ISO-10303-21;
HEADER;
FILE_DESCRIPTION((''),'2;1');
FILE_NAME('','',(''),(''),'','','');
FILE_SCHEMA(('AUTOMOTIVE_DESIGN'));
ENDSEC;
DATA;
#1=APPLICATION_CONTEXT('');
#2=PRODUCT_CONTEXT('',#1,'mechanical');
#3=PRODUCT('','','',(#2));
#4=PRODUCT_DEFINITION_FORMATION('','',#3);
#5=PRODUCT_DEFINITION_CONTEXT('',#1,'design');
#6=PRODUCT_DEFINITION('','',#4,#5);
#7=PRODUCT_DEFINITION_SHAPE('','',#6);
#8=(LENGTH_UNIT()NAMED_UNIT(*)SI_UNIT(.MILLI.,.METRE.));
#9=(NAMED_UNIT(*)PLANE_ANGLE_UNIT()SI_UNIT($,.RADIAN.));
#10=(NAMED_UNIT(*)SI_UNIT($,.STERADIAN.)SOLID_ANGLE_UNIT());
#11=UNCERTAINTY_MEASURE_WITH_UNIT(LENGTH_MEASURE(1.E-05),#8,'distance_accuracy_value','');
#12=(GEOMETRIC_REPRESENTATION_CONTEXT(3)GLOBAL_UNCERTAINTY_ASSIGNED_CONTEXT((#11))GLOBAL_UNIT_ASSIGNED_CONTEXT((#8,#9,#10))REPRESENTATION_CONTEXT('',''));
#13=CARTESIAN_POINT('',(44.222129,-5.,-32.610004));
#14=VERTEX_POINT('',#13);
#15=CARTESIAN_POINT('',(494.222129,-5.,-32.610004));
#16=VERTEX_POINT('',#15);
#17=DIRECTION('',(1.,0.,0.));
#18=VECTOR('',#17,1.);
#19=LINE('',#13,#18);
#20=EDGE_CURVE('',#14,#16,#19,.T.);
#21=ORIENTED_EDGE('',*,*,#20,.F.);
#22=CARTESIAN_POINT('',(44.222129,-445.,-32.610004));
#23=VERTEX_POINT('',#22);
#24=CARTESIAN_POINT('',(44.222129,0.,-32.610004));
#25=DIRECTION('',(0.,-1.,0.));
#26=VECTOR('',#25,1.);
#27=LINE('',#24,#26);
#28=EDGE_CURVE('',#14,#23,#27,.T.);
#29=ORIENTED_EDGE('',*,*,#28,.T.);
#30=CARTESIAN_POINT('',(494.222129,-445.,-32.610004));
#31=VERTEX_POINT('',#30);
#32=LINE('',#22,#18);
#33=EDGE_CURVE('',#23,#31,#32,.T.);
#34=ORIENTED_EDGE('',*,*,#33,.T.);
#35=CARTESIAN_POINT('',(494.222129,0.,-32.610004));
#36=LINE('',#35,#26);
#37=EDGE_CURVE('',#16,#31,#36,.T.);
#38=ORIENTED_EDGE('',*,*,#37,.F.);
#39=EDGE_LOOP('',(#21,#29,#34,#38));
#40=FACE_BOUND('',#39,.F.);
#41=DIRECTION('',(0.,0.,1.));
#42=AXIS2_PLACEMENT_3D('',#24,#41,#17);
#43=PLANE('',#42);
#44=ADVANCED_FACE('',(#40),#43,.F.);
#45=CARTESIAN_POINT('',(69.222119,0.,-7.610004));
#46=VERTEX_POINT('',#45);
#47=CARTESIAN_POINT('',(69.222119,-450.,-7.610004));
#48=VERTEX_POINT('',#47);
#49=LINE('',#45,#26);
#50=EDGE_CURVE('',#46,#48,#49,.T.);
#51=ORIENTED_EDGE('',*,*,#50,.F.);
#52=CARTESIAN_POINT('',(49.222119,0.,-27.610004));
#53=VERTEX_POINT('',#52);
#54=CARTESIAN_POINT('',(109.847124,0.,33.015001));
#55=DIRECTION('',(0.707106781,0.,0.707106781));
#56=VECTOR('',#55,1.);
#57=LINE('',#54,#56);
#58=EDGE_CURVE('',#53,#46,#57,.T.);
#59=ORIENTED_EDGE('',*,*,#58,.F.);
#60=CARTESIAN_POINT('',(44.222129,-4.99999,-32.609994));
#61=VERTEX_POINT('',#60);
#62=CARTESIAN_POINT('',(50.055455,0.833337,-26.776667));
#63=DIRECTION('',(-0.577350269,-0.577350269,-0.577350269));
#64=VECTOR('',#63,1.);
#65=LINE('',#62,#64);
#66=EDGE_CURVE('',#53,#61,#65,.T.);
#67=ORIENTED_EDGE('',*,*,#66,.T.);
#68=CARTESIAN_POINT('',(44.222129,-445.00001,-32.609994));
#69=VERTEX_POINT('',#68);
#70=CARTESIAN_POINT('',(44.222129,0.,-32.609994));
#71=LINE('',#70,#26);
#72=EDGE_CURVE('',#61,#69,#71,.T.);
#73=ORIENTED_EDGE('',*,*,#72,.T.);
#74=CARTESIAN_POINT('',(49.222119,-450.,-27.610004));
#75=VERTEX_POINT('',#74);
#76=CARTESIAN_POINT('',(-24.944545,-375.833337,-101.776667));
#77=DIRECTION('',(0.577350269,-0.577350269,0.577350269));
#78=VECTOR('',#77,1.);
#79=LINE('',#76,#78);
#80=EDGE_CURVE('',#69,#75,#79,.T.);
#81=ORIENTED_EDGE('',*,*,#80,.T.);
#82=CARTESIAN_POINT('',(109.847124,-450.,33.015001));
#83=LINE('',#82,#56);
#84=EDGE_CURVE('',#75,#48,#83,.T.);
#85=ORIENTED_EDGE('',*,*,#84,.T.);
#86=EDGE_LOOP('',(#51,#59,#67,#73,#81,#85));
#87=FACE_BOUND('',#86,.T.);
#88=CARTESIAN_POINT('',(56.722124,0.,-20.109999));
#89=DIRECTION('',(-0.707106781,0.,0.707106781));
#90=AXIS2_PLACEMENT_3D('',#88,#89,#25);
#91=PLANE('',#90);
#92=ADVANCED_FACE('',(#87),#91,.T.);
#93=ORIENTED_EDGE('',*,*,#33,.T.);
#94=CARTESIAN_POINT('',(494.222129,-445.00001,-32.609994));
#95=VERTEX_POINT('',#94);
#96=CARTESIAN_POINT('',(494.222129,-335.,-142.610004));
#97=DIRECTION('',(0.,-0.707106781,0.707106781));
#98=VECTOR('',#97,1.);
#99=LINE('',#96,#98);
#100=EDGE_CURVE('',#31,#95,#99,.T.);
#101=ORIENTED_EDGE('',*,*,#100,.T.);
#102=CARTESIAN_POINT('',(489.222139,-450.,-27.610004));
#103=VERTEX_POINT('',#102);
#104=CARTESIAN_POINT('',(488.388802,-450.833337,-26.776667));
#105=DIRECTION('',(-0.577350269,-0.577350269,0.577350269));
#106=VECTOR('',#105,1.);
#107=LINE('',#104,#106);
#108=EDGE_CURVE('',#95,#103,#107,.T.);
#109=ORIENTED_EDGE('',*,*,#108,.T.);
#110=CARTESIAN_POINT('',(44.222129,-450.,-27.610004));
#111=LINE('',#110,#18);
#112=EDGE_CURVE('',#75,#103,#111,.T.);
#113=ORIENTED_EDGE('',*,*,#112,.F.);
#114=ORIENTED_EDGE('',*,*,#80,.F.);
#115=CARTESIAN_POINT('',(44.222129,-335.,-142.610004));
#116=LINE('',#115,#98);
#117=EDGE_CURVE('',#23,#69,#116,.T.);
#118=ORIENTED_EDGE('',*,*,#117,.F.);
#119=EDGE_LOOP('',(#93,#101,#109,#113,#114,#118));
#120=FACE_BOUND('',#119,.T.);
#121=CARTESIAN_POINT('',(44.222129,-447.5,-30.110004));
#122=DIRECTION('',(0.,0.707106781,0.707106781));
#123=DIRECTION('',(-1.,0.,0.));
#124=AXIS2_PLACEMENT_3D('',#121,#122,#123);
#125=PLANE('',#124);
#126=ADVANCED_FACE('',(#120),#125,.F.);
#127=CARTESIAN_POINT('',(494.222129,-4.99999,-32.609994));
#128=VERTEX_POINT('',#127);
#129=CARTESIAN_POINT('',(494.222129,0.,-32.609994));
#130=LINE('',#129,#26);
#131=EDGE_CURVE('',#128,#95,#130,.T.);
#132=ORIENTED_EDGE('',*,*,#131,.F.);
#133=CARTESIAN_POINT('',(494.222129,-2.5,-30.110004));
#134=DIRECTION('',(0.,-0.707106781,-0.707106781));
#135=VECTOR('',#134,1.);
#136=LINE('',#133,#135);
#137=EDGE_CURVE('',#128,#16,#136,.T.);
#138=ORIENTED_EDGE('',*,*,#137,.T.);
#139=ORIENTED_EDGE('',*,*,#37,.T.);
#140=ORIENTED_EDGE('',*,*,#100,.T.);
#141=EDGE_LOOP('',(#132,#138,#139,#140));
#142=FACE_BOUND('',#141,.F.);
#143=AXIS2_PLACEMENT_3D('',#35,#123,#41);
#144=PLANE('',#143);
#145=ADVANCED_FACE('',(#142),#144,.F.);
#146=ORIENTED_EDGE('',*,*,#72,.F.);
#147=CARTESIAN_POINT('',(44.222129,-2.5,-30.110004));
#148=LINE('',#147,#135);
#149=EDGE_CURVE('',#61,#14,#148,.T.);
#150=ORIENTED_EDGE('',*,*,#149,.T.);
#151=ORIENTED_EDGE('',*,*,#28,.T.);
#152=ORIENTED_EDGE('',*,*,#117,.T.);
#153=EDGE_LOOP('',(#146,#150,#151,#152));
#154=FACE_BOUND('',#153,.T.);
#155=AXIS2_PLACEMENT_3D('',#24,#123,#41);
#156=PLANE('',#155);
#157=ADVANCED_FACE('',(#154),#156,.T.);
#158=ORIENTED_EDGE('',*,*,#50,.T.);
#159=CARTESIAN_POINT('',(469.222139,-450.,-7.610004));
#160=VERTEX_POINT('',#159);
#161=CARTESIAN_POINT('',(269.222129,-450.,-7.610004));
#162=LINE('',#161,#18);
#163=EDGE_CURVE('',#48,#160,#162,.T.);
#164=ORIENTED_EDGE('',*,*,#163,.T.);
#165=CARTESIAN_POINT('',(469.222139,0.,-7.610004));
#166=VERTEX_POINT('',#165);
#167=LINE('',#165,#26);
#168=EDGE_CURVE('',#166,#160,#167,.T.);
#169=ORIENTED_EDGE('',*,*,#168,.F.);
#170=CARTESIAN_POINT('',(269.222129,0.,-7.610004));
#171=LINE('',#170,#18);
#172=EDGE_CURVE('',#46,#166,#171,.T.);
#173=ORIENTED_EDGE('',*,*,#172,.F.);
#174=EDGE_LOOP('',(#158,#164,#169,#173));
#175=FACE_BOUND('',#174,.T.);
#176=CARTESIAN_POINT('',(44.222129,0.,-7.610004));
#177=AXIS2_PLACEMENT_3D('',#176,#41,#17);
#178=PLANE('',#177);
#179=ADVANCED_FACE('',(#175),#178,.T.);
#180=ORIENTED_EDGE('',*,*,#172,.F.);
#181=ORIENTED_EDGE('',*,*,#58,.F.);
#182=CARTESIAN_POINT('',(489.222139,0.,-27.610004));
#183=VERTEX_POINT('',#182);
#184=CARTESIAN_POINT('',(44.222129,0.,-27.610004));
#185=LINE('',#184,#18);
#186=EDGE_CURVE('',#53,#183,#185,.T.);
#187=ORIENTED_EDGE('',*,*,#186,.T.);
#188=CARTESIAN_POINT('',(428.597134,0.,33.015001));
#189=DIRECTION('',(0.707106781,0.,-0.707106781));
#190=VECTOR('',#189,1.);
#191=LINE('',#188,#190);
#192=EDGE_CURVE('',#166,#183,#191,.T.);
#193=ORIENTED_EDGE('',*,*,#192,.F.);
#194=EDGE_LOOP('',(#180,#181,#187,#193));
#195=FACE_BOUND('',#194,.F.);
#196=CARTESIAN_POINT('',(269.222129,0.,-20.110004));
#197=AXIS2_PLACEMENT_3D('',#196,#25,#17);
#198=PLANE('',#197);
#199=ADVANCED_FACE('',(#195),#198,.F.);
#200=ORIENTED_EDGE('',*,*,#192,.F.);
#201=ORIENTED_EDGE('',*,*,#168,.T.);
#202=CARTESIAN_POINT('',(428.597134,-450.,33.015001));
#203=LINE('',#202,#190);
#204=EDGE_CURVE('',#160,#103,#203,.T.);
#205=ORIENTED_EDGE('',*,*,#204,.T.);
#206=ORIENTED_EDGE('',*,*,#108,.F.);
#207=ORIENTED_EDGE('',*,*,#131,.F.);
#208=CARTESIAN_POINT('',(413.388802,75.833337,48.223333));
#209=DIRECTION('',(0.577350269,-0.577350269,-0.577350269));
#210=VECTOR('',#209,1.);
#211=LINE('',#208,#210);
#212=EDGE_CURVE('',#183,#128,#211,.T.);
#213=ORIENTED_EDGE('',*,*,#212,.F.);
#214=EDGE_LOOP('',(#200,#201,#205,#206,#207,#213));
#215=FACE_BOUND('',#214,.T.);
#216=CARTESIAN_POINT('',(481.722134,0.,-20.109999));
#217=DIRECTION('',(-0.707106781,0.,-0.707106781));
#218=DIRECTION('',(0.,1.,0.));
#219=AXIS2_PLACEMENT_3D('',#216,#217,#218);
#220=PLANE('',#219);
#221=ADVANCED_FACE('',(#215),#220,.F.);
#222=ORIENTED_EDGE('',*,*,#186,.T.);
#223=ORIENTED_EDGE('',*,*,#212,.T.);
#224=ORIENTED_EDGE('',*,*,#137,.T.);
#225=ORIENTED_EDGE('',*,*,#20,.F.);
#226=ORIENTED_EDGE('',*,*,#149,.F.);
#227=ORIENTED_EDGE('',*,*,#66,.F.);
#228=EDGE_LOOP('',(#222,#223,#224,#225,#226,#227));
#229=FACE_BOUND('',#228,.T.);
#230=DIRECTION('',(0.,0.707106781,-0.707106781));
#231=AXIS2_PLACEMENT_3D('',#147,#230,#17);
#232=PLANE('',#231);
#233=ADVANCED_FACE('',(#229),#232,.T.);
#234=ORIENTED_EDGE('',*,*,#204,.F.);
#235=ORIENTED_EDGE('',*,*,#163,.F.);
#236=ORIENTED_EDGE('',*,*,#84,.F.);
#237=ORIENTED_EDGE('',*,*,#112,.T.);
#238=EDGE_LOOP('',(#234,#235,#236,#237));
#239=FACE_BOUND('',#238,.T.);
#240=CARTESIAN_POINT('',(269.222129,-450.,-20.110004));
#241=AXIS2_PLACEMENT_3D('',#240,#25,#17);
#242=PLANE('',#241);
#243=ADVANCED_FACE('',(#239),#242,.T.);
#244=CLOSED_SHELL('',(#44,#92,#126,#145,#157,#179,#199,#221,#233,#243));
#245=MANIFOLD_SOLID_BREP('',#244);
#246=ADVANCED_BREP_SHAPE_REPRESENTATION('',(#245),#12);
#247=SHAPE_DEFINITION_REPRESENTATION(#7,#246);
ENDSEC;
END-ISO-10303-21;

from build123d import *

# Parameters (mm, degrees)
F0_W     = 450
F0_H     = 25
F1_DEPTH = 450
F2_SIZE  = 24.99999
F3_SIZE  = 24.99999
F4_SIZE  = 5


# Not quite as in the source:
# - a fillet or chamfer is up to 0.001 mm smaller than in the source, because OpenCascade refuses the exact size


with BuildPart() as f1:
    # F0 (on Front) → F1 (new body)
    with BuildSketch(Plane.XZ):
        with Locations((269.2221287504, -20.1100035338)):
            Rectangle(F0_W, F0_H)
    extrude(amount=F1_DEPTH)

    # F2 (size 25 in the source; OpenCascade refuses exactly that, so slightly less here)
    f2_edges = [f1.edges().sort_by_distance(p)[0] for p in [
        (44.222129, -225, -7.610004),
    ]]
    chamfer(f2_edges, length=F2_SIZE)

    # F3 (size 25 in the source; OpenCascade refuses exactly that, so slightly less here)
    f3_edges = [f1.edges().sort_by_distance(p)[0] for p in [
        (494.222129, -225, -7.610004),
    ]]
    chamfer(f3_edges, length=F3_SIZE)

    # F4
    f4_edges = [f1.edges().sort_by_distance(p)[0] for p in [
        (269.222129, -450, -32.610004),
        (269.222129, 0, -32.610004),
    ]]
    chamfer(f4_edges, length=F4_SIZE)


solid = f1.part
